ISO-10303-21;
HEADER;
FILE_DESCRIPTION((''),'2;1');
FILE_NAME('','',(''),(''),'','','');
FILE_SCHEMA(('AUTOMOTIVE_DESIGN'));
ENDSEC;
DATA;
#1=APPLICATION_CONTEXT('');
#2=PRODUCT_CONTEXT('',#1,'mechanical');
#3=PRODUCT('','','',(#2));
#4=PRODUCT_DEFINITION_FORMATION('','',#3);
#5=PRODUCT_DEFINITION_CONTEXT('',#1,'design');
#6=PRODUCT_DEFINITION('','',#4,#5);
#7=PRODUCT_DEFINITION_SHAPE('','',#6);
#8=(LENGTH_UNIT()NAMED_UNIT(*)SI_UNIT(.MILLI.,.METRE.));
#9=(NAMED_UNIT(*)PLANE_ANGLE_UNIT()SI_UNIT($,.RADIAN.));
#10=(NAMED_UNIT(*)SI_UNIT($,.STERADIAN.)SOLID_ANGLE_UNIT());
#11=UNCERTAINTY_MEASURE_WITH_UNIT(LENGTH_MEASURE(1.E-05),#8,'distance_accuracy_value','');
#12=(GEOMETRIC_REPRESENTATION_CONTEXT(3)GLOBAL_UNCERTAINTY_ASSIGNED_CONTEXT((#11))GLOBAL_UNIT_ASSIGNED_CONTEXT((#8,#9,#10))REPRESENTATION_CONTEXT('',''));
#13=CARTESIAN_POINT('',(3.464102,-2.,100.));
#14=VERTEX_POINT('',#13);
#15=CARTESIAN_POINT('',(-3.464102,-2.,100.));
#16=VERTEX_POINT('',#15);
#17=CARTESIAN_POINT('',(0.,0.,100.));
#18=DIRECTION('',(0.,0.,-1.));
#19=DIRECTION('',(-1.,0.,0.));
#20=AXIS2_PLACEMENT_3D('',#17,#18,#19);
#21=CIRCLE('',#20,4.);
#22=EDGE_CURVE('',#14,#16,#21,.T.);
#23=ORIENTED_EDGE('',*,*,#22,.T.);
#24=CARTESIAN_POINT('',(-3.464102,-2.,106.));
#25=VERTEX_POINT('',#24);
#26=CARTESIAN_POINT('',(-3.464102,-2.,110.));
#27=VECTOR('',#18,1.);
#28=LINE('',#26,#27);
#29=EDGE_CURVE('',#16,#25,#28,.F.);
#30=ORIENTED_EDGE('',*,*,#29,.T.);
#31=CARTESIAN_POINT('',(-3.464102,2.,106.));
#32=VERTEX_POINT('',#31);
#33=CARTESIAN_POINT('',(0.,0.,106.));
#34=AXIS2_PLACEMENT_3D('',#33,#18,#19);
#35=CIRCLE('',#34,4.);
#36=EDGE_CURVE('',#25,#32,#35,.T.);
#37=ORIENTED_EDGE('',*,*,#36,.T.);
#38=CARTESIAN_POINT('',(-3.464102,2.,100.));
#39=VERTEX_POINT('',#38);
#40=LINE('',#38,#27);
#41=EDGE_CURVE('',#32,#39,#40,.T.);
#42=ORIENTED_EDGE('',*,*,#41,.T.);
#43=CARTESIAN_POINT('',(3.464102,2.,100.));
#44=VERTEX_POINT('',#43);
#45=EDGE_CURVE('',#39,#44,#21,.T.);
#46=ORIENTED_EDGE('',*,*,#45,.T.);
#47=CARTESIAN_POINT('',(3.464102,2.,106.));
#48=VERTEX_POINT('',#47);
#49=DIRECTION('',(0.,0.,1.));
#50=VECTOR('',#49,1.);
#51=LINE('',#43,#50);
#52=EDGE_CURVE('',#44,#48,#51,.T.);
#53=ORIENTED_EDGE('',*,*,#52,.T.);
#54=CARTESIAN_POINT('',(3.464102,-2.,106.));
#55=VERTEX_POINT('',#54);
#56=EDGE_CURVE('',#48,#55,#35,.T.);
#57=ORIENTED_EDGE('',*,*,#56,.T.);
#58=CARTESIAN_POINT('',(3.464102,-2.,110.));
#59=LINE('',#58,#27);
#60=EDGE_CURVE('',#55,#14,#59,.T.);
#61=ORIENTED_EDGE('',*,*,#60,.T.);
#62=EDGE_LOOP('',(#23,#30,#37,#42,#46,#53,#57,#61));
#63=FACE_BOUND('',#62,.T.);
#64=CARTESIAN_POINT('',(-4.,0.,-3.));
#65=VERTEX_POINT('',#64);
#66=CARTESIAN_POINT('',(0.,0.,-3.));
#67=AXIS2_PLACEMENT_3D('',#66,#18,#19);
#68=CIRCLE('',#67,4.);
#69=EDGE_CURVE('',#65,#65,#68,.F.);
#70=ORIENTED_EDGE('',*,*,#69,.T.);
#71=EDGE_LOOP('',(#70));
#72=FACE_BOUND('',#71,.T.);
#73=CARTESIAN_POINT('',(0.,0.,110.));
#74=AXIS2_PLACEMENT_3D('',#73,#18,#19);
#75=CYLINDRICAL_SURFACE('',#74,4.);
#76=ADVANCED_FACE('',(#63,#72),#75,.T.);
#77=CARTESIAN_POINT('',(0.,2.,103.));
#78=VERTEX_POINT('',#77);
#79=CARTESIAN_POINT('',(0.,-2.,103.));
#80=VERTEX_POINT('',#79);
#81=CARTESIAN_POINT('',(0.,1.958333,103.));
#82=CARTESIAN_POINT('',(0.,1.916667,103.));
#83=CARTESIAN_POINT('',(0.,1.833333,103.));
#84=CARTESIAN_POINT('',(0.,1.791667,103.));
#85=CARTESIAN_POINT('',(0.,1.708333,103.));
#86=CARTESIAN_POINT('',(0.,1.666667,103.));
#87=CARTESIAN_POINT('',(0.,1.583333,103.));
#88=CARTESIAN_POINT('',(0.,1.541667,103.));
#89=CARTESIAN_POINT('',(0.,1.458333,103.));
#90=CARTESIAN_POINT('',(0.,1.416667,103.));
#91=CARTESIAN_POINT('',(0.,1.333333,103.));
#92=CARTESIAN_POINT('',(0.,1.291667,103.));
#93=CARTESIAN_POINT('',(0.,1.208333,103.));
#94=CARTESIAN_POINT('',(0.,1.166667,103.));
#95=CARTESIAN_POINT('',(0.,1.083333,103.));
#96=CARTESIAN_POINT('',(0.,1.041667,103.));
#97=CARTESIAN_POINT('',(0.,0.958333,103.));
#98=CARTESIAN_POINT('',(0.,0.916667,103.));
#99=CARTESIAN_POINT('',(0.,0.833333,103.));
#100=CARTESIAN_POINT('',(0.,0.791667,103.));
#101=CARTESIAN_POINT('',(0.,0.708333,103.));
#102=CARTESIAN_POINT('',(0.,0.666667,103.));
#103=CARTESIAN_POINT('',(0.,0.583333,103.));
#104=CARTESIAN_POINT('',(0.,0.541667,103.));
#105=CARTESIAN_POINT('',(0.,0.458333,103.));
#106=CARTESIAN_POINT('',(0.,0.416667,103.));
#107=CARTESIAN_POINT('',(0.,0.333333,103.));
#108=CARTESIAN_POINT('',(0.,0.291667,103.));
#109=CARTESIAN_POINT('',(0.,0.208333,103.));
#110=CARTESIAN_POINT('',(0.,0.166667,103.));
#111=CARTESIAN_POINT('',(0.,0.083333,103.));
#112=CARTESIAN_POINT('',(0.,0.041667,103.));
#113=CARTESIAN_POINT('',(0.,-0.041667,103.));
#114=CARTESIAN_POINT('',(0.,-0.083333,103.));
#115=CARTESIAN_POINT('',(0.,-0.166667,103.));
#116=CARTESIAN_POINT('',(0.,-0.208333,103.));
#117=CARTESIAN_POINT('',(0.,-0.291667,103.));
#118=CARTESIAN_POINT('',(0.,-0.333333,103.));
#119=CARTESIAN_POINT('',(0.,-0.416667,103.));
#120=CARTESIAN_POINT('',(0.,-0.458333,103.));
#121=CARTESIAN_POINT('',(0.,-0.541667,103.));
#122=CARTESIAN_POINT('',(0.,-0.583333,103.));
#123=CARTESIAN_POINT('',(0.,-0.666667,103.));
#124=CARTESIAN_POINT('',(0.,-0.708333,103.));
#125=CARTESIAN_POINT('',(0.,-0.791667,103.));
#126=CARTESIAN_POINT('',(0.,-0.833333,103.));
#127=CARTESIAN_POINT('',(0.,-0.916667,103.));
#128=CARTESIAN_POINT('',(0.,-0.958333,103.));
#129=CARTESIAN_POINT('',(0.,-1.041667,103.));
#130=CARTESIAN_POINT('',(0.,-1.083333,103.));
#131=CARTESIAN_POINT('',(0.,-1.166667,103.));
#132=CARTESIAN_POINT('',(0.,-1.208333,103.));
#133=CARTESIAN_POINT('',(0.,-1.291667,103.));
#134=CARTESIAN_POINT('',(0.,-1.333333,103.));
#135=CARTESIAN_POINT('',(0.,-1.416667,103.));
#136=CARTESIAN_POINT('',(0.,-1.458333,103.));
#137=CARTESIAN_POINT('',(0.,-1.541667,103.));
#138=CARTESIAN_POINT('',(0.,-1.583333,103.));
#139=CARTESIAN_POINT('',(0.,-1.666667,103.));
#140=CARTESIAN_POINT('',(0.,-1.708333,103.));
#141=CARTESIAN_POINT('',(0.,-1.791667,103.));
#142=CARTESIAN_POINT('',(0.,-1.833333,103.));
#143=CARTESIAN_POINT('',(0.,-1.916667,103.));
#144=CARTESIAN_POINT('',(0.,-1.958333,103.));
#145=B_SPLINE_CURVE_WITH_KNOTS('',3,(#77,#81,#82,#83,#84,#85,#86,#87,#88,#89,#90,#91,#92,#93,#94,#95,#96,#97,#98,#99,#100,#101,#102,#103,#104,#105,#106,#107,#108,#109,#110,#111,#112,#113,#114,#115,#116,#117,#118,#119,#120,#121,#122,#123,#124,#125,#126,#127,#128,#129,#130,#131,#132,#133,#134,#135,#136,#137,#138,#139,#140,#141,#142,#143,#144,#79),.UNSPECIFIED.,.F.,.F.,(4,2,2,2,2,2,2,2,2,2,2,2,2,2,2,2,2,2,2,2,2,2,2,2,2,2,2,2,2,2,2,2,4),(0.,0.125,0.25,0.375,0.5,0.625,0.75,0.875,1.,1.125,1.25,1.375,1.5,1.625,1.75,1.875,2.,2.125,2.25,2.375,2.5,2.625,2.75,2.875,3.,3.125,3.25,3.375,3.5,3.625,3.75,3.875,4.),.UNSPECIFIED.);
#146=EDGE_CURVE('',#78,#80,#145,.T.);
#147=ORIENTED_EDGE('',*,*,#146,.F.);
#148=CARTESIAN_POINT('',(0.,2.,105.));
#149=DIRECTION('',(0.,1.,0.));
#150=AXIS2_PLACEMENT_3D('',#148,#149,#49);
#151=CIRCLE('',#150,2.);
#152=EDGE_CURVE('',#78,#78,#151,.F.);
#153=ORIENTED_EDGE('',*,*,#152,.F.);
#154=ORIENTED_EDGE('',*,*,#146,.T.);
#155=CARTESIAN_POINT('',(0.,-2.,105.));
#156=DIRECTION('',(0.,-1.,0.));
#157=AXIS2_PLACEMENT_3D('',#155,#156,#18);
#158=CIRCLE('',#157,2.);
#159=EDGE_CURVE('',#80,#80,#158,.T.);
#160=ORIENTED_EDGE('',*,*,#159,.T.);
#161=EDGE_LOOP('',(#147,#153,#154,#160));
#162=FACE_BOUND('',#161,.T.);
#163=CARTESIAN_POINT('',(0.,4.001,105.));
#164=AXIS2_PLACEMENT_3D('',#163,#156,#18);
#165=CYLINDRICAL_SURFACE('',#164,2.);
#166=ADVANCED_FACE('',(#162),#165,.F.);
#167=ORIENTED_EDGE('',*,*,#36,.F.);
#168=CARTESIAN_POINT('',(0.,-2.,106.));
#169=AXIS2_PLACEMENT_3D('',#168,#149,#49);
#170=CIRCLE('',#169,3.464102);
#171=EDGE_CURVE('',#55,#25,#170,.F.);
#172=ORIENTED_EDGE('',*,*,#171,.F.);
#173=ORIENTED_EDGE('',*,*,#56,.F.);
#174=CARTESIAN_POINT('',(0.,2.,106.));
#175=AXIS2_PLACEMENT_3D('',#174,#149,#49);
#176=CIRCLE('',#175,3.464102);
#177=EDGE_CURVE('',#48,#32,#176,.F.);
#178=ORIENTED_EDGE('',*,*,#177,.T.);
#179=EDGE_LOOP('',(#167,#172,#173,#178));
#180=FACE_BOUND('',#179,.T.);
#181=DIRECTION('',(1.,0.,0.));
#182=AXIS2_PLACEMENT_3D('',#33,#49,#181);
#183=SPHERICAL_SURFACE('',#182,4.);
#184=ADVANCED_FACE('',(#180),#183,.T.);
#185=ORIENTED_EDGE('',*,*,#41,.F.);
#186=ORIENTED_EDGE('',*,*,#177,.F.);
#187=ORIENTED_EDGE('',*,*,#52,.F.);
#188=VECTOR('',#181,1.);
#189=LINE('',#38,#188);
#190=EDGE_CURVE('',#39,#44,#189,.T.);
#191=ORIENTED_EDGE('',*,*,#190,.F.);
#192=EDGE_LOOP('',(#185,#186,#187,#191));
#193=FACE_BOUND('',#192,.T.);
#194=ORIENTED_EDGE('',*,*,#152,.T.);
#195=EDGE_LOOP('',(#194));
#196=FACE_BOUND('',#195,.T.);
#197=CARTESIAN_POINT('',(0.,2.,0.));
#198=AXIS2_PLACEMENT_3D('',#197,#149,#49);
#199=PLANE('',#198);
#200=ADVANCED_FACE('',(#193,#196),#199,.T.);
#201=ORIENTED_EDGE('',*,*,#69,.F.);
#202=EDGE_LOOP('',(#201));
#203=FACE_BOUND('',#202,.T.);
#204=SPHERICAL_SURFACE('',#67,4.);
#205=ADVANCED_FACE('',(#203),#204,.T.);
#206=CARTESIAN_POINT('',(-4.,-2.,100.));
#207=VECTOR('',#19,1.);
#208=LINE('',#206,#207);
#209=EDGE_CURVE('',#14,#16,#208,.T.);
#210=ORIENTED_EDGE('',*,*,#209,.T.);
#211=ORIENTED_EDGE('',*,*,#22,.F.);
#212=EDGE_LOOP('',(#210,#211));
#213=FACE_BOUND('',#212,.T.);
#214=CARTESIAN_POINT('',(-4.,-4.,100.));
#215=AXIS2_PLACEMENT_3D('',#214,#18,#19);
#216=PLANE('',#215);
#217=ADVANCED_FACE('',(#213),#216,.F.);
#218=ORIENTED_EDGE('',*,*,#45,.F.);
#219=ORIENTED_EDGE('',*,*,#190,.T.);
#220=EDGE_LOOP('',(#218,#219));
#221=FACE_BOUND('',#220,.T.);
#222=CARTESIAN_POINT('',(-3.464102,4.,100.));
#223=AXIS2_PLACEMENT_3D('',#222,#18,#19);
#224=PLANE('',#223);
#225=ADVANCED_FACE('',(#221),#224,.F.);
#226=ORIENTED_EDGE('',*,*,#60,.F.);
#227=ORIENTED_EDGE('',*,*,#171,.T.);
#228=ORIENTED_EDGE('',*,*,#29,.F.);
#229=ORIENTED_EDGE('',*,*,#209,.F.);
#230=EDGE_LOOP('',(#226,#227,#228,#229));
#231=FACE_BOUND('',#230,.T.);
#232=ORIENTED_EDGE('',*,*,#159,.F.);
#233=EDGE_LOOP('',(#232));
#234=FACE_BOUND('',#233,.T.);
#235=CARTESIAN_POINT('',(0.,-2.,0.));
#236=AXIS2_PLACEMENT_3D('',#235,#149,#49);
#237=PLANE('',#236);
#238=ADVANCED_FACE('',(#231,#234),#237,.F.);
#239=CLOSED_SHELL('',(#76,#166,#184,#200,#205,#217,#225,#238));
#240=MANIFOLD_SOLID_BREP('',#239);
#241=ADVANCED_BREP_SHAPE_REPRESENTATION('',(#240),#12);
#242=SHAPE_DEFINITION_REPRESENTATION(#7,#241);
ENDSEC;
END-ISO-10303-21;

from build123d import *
from build123d.topology import SkipClean

# Parameters (mm, degrees)
SZKIC1_R                    = 4
DODANIE_WYCI_GNI_CIE1_DEPTH = 110
ZAOKR_GLENIE6_R             = 4
WYTNIJ_WYCI_GNI_CIE4_START  = -2
SZKIC2_W                    = 8
SZKIC2_H                    = 10
WYTNIJ_WYCI_GNI_CIE4_DEPTH  = 2
WYTNIJ_WYCI_GNI_CIE5_START  = -4
SZKIC5_W                    = 6.92820323
SZKIC5_H                    = 10
WYTNIJ_WYCI_GNI_CIE5_DEPTH  = 2
WYTNIJ_WYCI_GNI_CIE6_REACH  = 112.236
SZKIC6_R                    = 2
DODANIE_WYCI_GNI_CIE2_START = 7
SZKIC8_R                    = 4
DODANIE_WYCI_GNI_CIE2_DEPTH = 7
ZAOKR_GLENIE7_R             = 4


with BuildPart() as part:
    # Szkic1 → Dodanie-wyciągnięcie1 (new body)
    with BuildSketch(Plane.XY):
        Circle(SZKIC1_R)
    extrude(amount=DODANIE_WYCI_GNI_CIE1_DEPTH)

    # Zaokrąglenie6
    zaokr_glenie6_edges = [part.edges().sort_by_distance(p)[0] for p in [
        (-4, 0, 110),
    ]]
    fillet(zaokr_glenie6_edges, radius=ZAOKR_GLENIE6_R)

    # Szkic2 → Wytnij-wyciągnięcie4 (cut)
    with BuildSketch(Plane(origin=(0, 0, 0), x_dir=(1, 0, 0), z_dir=(0, 1, 0)).offset(WYTNIJ_WYCI_GNI_CIE4_START)):
        with Locations((0, -105)):
            Rectangle(SZKIC2_W, SZKIC2_H)
    extrude(amount=-WYTNIJ_WYCI_GNI_CIE4_DEPTH, mode=Mode.SUBTRACT)

    # Szkic5 → Wytnij-wyciągnięcie5 (cut)
    with BuildSketch(Plane.XZ.offset(2).offset(WYTNIJ_WYCI_GNI_CIE5_START)):
        with Locations((0, 105)):
            Rectangle(SZKIC5_W, SZKIC5_H)
    extrude(amount=-WYTNIJ_WYCI_GNI_CIE5_DEPTH, mode=Mode.SUBTRACT)

    # Szkic6 → Wytnij-wyciągnięcie6 (cut, up to next)
    with BuildSketch(Plane.XZ.offset(2), mode=Mode.PRIVATE) as wytnij_wyci_gni_cie6_sk1:
        with Locations((0, 105)):
            Circle(SZKIC6_R)
    wytnij_wyci_gni_cie6_tool1 = extrude(wytnij_wyci_gni_cie6_sk1.sketch, amount=-WYTNIJ_WYCI_GNI_CIE6_REACH, mode=Mode.PRIVATE) & part.part
    add(wytnij_wyci_gni_cie6_tool1.solids().sort_by_distance((0, -2, 105))[0], mode=Mode.SUBTRACT)

    # Szkic8 → Dodanie-wyciągnięcie2 (add)
    with SkipClean():  # the faces are left unmerged after this step: merging them gives an invalid solid
        with BuildSketch(Plane(origin=(0, 0, 0), x_dir=(-1, 0, 0), z_dir=(0, 0, -1)).offset(DODANIE_WYCI_GNI_CIE2_START)):
            Circle(SZKIC8_R)
        extrude(amount=-DODANIE_WYCI_GNI_CIE2_DEPTH)

    # Zaokrąglenie7
    zaokr_glenie7_edges = [part.edges().sort_by_distance(p)[0] for p in [
        (4, 0, -7),
    ]]
    fillet(zaokr_glenie7_edges, radius=ZAOKR_GLENIE7_R)


solid = part.part
